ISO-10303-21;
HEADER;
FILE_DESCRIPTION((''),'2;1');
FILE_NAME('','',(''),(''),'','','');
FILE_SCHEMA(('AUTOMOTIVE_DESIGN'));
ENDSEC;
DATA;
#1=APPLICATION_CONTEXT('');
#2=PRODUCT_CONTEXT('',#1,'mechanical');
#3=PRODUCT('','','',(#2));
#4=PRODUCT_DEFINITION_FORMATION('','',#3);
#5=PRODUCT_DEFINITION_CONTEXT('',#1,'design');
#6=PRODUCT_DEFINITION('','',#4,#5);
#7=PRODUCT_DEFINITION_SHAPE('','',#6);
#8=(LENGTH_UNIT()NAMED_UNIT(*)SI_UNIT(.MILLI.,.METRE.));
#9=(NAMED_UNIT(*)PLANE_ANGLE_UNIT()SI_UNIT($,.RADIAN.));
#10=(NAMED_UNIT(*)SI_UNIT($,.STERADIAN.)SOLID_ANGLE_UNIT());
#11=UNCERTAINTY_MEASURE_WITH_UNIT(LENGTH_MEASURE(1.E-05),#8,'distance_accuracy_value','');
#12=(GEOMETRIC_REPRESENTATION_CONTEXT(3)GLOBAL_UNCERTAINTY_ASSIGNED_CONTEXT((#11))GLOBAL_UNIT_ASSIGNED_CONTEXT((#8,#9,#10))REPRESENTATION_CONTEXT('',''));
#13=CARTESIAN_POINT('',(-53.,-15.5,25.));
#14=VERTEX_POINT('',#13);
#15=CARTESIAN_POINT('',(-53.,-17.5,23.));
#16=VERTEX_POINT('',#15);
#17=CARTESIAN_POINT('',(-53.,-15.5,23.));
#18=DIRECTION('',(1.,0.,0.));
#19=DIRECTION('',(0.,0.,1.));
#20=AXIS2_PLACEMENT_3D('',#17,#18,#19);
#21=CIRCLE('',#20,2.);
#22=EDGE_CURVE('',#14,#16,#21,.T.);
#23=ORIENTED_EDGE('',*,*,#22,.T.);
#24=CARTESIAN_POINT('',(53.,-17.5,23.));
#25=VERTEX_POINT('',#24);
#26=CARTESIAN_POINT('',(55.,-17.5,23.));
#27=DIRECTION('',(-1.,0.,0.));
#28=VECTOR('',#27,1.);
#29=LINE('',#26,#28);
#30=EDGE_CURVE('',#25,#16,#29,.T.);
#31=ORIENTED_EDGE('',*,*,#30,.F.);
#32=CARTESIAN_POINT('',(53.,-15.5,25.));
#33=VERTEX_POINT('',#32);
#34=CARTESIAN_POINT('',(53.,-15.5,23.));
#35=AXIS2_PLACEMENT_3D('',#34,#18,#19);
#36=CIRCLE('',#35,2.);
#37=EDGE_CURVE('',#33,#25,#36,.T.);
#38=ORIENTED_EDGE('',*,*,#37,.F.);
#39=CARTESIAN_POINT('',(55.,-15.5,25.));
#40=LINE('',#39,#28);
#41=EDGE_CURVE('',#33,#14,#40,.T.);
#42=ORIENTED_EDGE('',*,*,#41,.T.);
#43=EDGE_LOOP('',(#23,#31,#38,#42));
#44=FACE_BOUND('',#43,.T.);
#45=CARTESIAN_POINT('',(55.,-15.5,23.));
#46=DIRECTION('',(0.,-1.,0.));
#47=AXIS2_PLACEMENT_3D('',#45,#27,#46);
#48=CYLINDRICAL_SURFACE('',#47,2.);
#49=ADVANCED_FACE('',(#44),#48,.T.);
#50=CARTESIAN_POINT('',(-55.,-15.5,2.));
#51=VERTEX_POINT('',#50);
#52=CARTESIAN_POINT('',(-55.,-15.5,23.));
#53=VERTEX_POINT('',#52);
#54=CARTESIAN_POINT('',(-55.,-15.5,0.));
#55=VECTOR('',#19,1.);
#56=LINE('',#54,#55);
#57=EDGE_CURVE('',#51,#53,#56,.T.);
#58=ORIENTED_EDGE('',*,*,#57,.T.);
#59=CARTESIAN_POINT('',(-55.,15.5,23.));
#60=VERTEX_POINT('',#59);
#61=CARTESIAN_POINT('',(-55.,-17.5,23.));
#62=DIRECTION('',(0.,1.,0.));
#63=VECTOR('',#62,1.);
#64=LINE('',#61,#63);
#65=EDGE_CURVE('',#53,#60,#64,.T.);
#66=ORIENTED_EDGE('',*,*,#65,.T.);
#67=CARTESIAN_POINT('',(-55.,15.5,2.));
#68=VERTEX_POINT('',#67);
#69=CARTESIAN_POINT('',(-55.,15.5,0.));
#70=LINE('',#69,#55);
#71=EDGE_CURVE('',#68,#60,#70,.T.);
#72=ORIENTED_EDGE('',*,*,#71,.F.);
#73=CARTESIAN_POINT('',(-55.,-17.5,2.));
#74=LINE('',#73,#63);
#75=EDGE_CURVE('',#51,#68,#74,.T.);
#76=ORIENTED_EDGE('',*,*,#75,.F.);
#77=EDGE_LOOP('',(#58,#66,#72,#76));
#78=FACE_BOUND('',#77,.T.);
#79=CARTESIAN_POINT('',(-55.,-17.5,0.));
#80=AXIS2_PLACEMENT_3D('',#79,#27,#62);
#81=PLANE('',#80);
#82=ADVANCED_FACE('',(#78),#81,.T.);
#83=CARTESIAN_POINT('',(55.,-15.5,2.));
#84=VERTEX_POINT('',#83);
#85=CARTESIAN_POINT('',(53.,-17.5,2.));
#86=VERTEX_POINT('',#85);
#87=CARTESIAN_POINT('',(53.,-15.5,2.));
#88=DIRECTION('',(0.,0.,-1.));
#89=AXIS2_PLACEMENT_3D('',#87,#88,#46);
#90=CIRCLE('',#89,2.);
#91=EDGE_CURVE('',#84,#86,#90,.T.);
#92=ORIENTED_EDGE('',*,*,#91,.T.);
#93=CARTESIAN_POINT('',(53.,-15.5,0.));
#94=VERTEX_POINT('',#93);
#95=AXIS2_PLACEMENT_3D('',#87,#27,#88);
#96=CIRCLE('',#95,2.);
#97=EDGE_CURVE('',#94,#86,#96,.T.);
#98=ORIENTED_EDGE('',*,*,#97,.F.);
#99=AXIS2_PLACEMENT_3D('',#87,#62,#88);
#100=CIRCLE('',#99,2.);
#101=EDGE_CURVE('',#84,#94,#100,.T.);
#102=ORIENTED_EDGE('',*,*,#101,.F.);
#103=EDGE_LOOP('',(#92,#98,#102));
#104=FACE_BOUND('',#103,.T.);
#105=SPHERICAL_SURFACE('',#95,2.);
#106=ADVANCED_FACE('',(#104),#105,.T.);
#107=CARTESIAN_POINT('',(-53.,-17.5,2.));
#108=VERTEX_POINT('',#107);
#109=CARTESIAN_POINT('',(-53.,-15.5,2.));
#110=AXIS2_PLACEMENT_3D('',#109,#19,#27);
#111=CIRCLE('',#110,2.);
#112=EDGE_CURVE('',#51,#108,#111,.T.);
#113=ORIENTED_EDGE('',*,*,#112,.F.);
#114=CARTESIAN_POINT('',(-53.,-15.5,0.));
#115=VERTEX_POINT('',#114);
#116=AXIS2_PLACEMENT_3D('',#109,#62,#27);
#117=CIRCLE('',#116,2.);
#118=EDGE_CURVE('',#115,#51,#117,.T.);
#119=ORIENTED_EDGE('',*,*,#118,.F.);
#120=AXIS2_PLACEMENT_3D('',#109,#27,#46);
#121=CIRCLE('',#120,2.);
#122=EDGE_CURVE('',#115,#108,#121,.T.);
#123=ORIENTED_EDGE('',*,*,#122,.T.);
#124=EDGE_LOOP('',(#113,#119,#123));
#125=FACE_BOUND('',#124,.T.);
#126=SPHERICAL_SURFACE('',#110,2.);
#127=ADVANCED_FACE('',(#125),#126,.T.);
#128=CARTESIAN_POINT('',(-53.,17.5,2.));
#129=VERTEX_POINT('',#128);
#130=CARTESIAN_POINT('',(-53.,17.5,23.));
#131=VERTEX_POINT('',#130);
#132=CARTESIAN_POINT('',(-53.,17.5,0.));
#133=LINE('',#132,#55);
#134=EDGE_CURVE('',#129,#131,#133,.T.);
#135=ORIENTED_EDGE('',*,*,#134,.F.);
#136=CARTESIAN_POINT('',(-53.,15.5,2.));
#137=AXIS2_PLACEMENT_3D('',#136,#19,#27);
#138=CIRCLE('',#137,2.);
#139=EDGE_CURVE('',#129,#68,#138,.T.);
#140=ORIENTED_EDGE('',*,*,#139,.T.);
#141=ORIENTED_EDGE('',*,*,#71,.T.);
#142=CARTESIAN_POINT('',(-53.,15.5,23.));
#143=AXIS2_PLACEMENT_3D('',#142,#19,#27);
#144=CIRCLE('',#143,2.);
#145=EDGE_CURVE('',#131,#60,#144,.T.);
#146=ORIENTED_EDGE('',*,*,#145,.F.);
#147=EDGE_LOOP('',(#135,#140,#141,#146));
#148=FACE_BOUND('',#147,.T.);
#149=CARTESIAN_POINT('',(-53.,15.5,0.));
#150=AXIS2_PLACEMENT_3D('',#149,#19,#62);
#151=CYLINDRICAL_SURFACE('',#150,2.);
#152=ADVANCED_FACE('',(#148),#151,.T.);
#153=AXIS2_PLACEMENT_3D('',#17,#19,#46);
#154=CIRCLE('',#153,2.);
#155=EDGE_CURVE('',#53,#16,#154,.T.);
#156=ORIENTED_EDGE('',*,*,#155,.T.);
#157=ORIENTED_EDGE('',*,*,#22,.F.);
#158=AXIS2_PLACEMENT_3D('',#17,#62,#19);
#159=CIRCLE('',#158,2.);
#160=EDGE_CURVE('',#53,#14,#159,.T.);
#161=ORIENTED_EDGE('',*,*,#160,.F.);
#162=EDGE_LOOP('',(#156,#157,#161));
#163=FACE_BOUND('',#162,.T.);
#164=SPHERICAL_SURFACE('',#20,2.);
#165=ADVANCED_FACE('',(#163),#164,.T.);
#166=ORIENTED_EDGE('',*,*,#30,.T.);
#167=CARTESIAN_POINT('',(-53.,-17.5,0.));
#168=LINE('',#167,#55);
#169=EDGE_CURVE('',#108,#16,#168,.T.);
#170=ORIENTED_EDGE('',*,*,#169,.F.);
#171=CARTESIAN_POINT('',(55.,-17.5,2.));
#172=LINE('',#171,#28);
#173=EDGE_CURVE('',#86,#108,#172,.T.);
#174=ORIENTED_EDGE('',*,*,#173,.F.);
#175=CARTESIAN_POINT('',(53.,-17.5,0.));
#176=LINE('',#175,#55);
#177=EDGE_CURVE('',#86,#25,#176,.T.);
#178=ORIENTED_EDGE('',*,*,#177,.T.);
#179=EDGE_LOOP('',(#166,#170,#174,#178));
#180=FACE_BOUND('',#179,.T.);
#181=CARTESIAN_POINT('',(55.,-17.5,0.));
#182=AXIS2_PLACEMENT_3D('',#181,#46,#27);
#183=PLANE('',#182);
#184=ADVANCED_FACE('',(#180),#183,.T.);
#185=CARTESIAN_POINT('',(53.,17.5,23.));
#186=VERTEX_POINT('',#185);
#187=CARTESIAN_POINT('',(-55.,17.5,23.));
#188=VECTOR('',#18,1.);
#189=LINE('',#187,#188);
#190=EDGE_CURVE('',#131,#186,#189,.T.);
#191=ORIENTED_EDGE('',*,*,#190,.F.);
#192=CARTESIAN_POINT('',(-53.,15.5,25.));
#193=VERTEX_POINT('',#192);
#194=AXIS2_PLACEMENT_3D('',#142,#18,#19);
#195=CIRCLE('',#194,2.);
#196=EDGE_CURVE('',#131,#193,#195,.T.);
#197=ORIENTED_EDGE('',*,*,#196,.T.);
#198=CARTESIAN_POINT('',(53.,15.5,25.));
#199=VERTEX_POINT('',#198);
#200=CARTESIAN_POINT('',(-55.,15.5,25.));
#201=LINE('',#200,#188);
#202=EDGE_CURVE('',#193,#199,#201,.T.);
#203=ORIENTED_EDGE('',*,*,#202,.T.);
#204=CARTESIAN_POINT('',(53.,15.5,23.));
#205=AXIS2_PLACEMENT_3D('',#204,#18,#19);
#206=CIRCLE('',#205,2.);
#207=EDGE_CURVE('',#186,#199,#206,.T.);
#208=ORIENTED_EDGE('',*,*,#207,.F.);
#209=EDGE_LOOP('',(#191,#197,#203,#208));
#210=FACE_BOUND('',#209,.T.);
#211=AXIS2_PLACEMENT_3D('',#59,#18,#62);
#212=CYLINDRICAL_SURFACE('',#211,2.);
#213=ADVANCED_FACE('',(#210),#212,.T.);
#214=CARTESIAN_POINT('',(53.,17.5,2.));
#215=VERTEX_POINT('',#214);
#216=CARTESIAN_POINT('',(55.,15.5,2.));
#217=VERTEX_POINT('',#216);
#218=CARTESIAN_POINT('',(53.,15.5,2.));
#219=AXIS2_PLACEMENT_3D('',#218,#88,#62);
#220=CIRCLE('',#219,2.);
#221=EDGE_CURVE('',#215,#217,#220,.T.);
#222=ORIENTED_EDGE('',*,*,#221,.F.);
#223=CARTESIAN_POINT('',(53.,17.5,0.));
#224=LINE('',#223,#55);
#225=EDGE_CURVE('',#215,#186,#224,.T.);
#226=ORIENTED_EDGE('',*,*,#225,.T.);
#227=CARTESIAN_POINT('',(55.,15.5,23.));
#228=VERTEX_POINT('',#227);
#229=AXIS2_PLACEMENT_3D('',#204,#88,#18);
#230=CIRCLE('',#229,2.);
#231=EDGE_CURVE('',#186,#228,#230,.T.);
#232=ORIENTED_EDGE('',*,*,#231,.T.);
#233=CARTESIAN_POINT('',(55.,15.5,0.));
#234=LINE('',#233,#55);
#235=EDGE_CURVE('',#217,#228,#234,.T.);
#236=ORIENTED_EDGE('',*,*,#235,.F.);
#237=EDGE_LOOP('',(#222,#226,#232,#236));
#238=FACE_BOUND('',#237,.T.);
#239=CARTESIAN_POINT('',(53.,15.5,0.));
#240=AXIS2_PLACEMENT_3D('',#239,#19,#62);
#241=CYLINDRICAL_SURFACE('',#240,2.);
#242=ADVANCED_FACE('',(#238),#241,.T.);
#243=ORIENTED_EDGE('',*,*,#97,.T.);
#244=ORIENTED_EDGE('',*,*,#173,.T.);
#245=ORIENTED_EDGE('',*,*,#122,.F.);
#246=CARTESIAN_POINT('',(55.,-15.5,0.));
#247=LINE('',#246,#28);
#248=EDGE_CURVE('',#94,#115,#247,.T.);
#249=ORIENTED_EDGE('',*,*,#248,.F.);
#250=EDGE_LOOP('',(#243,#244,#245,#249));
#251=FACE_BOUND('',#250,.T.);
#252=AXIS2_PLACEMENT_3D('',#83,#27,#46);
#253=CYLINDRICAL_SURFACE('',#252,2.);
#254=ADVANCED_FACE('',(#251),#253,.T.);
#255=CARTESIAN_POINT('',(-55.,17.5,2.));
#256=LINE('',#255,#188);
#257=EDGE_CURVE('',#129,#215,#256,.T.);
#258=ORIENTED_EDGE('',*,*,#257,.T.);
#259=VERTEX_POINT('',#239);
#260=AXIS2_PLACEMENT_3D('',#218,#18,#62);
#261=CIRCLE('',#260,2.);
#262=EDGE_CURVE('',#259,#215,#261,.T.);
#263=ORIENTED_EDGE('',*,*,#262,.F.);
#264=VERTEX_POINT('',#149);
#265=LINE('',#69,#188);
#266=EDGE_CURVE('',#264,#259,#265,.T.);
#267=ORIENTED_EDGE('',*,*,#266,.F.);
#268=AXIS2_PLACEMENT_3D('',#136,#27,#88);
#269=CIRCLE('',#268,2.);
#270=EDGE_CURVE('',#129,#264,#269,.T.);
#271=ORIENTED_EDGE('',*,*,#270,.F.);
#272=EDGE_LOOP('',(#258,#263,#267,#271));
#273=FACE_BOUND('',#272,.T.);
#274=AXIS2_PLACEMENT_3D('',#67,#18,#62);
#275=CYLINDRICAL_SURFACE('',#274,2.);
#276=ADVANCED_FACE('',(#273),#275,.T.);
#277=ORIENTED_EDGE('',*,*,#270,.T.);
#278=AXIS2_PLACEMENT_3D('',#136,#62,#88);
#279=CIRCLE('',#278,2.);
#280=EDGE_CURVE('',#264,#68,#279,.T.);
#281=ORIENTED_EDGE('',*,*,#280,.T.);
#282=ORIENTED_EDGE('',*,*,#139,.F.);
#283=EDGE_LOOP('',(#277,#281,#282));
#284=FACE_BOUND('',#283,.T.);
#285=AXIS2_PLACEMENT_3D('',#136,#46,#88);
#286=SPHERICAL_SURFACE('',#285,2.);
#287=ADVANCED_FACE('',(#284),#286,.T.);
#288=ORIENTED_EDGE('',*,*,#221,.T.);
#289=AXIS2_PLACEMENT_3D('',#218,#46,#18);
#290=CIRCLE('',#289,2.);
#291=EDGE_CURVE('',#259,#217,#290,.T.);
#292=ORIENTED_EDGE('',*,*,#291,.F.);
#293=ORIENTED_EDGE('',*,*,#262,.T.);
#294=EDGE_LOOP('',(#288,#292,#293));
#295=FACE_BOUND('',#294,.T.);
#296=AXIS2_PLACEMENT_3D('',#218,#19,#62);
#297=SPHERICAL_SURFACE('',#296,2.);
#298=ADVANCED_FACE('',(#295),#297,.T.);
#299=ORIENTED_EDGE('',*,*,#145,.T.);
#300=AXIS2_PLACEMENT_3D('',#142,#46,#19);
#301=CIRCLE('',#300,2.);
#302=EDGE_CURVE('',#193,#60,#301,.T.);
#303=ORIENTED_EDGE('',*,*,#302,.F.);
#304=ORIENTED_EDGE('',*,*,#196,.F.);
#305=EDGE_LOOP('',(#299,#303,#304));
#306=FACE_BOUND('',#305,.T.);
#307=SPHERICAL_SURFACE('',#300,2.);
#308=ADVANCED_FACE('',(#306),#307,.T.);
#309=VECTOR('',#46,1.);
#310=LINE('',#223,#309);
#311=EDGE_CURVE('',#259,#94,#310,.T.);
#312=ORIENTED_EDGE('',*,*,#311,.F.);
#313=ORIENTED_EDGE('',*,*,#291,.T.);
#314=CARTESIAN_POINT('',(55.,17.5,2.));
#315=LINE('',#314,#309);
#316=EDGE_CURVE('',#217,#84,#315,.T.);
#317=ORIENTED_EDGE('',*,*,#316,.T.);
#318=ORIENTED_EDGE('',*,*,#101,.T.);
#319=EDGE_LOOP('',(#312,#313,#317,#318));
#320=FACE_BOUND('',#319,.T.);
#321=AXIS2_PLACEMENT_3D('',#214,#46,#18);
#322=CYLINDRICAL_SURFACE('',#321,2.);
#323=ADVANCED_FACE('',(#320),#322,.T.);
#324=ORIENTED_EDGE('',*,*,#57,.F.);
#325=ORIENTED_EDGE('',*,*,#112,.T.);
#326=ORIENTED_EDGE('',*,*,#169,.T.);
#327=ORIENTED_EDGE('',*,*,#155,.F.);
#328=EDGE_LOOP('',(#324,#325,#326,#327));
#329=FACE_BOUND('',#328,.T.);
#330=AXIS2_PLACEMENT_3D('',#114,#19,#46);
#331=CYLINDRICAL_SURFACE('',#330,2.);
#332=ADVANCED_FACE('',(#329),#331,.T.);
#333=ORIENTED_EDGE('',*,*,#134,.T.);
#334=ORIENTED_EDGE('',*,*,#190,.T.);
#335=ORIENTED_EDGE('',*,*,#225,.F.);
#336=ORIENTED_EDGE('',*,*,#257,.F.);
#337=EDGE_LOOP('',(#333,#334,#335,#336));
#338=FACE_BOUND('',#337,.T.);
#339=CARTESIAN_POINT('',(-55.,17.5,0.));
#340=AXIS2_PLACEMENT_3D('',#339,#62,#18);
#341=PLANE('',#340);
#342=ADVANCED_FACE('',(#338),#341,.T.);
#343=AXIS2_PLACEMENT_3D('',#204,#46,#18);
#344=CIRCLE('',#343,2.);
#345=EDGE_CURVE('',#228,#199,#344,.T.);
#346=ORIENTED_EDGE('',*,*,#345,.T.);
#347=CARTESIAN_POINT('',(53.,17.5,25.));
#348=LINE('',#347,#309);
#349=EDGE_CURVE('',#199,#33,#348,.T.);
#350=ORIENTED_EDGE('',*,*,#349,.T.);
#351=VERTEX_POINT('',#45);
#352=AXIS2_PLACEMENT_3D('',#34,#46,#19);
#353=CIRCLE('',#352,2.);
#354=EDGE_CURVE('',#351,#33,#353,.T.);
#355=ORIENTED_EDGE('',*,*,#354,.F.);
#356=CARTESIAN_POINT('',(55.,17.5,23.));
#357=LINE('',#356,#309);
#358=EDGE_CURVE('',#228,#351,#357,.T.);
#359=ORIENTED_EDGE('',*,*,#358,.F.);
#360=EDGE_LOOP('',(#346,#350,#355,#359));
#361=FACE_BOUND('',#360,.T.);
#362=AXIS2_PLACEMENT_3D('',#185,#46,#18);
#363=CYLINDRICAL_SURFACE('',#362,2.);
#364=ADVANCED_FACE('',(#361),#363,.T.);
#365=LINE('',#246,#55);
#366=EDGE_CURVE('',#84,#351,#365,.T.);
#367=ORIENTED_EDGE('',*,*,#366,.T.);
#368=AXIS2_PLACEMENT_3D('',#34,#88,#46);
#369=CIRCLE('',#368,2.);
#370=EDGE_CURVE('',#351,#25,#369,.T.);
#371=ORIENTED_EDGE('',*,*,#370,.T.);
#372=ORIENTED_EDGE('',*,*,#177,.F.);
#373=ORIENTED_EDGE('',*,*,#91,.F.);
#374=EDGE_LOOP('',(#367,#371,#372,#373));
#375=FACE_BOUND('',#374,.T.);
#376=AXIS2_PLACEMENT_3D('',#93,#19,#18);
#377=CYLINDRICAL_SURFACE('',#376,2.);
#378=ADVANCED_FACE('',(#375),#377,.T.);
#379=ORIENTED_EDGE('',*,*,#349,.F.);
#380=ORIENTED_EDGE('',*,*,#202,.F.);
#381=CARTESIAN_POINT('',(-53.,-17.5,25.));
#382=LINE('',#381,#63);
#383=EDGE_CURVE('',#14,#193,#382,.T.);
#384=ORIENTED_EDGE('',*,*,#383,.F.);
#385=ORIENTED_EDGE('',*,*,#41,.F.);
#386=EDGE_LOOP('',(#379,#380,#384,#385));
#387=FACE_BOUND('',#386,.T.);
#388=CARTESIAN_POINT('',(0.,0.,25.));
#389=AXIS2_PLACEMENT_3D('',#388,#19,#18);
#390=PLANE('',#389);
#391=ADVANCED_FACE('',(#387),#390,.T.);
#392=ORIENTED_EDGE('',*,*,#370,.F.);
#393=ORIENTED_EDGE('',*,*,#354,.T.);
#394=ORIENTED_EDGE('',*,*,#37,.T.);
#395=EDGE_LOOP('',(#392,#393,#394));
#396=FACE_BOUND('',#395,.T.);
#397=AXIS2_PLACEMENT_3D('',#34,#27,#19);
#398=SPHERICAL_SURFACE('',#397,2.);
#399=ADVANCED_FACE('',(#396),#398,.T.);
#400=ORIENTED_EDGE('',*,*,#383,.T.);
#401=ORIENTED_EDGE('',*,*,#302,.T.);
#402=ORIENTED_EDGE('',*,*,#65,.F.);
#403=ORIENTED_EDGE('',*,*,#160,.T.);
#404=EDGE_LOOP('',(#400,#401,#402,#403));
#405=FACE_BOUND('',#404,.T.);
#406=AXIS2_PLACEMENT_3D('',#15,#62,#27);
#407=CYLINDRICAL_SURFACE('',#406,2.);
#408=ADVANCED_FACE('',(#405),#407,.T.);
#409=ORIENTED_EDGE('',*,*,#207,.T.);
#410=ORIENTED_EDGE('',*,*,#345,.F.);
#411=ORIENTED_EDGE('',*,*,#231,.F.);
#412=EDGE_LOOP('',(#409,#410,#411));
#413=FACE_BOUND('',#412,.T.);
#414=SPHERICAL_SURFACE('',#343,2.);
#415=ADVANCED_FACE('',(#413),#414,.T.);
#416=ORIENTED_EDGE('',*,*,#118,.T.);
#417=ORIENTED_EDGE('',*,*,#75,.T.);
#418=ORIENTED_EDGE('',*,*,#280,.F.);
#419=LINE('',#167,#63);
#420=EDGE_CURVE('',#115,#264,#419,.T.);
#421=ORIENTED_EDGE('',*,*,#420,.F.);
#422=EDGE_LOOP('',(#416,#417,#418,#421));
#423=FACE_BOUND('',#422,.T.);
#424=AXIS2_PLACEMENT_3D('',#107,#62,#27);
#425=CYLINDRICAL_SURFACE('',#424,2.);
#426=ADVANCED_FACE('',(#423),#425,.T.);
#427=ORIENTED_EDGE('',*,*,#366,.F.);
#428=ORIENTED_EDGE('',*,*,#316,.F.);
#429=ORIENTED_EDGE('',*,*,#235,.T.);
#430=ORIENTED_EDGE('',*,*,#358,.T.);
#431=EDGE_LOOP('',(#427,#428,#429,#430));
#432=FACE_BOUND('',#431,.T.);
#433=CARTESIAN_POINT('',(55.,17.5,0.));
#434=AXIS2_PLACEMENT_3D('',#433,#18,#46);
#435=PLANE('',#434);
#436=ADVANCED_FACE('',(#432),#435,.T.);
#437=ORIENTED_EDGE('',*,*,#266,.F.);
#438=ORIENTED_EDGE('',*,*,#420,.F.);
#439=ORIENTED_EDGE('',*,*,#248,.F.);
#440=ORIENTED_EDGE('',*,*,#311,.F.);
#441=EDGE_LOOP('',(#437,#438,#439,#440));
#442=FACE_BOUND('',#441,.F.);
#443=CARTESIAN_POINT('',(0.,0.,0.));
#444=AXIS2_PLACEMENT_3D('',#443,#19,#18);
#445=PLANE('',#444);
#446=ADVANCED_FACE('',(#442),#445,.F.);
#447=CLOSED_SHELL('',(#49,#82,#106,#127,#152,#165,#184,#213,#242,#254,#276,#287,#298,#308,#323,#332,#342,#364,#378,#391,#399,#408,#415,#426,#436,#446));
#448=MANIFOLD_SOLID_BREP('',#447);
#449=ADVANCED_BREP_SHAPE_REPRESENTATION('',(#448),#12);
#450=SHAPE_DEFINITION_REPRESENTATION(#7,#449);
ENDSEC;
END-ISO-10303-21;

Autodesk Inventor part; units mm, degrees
ref_plane "YZ Plane" through (0, 0, 0) normal (1, 0, 0) x (0, 1, 0)
ref_plane "XZ Plane" through (0, 0, 0) normal (0, 1, 0) x (-1, 0, 0)
ref_plane "XY Plane" through (0, 0, 0) normal (0, 0, 1) x (1, 0, 0)
sketch "Sketch2" plane through (0, 0, 0) normal (0, 0, 1) x (1, 0, 0)
  line L0 (-55, 17.5) -> (55, 17.5)
  line L1 (55, 17.5) -> (55, -17.5)
  line L2 (55, -17.5) -> (-55, -17.5)
  line L3 (-55, -17.5) -> (-55, 17.5)
  line L4 (-55, 17.5) -> (55, -17.5) construction
  line L5 (55, 17.5) -> (-55, -17.5) construction
  point P0 (0, 0)
  dimension "d0" = 110
  dimension "d1" = 35
extrude "Extrusion1" add sketch "Sketch2" along normal blind 25
fillet "Fillet1" radius 2 12 edges at (0, -17.5, 25) (-55, 0, 25) (-55, -17.5, 12.5) (-55, 0, 0) (0, -17.5, 0) (55, 0, 25) (55, 17.5, 12.5) (0, 17.5, 25) (0, 17.5, 0) (55, 0, 0) (55, -17.5, 12.5) (-55, 17.5, 12.5)
properties part number "Lipo 3S Battery"
